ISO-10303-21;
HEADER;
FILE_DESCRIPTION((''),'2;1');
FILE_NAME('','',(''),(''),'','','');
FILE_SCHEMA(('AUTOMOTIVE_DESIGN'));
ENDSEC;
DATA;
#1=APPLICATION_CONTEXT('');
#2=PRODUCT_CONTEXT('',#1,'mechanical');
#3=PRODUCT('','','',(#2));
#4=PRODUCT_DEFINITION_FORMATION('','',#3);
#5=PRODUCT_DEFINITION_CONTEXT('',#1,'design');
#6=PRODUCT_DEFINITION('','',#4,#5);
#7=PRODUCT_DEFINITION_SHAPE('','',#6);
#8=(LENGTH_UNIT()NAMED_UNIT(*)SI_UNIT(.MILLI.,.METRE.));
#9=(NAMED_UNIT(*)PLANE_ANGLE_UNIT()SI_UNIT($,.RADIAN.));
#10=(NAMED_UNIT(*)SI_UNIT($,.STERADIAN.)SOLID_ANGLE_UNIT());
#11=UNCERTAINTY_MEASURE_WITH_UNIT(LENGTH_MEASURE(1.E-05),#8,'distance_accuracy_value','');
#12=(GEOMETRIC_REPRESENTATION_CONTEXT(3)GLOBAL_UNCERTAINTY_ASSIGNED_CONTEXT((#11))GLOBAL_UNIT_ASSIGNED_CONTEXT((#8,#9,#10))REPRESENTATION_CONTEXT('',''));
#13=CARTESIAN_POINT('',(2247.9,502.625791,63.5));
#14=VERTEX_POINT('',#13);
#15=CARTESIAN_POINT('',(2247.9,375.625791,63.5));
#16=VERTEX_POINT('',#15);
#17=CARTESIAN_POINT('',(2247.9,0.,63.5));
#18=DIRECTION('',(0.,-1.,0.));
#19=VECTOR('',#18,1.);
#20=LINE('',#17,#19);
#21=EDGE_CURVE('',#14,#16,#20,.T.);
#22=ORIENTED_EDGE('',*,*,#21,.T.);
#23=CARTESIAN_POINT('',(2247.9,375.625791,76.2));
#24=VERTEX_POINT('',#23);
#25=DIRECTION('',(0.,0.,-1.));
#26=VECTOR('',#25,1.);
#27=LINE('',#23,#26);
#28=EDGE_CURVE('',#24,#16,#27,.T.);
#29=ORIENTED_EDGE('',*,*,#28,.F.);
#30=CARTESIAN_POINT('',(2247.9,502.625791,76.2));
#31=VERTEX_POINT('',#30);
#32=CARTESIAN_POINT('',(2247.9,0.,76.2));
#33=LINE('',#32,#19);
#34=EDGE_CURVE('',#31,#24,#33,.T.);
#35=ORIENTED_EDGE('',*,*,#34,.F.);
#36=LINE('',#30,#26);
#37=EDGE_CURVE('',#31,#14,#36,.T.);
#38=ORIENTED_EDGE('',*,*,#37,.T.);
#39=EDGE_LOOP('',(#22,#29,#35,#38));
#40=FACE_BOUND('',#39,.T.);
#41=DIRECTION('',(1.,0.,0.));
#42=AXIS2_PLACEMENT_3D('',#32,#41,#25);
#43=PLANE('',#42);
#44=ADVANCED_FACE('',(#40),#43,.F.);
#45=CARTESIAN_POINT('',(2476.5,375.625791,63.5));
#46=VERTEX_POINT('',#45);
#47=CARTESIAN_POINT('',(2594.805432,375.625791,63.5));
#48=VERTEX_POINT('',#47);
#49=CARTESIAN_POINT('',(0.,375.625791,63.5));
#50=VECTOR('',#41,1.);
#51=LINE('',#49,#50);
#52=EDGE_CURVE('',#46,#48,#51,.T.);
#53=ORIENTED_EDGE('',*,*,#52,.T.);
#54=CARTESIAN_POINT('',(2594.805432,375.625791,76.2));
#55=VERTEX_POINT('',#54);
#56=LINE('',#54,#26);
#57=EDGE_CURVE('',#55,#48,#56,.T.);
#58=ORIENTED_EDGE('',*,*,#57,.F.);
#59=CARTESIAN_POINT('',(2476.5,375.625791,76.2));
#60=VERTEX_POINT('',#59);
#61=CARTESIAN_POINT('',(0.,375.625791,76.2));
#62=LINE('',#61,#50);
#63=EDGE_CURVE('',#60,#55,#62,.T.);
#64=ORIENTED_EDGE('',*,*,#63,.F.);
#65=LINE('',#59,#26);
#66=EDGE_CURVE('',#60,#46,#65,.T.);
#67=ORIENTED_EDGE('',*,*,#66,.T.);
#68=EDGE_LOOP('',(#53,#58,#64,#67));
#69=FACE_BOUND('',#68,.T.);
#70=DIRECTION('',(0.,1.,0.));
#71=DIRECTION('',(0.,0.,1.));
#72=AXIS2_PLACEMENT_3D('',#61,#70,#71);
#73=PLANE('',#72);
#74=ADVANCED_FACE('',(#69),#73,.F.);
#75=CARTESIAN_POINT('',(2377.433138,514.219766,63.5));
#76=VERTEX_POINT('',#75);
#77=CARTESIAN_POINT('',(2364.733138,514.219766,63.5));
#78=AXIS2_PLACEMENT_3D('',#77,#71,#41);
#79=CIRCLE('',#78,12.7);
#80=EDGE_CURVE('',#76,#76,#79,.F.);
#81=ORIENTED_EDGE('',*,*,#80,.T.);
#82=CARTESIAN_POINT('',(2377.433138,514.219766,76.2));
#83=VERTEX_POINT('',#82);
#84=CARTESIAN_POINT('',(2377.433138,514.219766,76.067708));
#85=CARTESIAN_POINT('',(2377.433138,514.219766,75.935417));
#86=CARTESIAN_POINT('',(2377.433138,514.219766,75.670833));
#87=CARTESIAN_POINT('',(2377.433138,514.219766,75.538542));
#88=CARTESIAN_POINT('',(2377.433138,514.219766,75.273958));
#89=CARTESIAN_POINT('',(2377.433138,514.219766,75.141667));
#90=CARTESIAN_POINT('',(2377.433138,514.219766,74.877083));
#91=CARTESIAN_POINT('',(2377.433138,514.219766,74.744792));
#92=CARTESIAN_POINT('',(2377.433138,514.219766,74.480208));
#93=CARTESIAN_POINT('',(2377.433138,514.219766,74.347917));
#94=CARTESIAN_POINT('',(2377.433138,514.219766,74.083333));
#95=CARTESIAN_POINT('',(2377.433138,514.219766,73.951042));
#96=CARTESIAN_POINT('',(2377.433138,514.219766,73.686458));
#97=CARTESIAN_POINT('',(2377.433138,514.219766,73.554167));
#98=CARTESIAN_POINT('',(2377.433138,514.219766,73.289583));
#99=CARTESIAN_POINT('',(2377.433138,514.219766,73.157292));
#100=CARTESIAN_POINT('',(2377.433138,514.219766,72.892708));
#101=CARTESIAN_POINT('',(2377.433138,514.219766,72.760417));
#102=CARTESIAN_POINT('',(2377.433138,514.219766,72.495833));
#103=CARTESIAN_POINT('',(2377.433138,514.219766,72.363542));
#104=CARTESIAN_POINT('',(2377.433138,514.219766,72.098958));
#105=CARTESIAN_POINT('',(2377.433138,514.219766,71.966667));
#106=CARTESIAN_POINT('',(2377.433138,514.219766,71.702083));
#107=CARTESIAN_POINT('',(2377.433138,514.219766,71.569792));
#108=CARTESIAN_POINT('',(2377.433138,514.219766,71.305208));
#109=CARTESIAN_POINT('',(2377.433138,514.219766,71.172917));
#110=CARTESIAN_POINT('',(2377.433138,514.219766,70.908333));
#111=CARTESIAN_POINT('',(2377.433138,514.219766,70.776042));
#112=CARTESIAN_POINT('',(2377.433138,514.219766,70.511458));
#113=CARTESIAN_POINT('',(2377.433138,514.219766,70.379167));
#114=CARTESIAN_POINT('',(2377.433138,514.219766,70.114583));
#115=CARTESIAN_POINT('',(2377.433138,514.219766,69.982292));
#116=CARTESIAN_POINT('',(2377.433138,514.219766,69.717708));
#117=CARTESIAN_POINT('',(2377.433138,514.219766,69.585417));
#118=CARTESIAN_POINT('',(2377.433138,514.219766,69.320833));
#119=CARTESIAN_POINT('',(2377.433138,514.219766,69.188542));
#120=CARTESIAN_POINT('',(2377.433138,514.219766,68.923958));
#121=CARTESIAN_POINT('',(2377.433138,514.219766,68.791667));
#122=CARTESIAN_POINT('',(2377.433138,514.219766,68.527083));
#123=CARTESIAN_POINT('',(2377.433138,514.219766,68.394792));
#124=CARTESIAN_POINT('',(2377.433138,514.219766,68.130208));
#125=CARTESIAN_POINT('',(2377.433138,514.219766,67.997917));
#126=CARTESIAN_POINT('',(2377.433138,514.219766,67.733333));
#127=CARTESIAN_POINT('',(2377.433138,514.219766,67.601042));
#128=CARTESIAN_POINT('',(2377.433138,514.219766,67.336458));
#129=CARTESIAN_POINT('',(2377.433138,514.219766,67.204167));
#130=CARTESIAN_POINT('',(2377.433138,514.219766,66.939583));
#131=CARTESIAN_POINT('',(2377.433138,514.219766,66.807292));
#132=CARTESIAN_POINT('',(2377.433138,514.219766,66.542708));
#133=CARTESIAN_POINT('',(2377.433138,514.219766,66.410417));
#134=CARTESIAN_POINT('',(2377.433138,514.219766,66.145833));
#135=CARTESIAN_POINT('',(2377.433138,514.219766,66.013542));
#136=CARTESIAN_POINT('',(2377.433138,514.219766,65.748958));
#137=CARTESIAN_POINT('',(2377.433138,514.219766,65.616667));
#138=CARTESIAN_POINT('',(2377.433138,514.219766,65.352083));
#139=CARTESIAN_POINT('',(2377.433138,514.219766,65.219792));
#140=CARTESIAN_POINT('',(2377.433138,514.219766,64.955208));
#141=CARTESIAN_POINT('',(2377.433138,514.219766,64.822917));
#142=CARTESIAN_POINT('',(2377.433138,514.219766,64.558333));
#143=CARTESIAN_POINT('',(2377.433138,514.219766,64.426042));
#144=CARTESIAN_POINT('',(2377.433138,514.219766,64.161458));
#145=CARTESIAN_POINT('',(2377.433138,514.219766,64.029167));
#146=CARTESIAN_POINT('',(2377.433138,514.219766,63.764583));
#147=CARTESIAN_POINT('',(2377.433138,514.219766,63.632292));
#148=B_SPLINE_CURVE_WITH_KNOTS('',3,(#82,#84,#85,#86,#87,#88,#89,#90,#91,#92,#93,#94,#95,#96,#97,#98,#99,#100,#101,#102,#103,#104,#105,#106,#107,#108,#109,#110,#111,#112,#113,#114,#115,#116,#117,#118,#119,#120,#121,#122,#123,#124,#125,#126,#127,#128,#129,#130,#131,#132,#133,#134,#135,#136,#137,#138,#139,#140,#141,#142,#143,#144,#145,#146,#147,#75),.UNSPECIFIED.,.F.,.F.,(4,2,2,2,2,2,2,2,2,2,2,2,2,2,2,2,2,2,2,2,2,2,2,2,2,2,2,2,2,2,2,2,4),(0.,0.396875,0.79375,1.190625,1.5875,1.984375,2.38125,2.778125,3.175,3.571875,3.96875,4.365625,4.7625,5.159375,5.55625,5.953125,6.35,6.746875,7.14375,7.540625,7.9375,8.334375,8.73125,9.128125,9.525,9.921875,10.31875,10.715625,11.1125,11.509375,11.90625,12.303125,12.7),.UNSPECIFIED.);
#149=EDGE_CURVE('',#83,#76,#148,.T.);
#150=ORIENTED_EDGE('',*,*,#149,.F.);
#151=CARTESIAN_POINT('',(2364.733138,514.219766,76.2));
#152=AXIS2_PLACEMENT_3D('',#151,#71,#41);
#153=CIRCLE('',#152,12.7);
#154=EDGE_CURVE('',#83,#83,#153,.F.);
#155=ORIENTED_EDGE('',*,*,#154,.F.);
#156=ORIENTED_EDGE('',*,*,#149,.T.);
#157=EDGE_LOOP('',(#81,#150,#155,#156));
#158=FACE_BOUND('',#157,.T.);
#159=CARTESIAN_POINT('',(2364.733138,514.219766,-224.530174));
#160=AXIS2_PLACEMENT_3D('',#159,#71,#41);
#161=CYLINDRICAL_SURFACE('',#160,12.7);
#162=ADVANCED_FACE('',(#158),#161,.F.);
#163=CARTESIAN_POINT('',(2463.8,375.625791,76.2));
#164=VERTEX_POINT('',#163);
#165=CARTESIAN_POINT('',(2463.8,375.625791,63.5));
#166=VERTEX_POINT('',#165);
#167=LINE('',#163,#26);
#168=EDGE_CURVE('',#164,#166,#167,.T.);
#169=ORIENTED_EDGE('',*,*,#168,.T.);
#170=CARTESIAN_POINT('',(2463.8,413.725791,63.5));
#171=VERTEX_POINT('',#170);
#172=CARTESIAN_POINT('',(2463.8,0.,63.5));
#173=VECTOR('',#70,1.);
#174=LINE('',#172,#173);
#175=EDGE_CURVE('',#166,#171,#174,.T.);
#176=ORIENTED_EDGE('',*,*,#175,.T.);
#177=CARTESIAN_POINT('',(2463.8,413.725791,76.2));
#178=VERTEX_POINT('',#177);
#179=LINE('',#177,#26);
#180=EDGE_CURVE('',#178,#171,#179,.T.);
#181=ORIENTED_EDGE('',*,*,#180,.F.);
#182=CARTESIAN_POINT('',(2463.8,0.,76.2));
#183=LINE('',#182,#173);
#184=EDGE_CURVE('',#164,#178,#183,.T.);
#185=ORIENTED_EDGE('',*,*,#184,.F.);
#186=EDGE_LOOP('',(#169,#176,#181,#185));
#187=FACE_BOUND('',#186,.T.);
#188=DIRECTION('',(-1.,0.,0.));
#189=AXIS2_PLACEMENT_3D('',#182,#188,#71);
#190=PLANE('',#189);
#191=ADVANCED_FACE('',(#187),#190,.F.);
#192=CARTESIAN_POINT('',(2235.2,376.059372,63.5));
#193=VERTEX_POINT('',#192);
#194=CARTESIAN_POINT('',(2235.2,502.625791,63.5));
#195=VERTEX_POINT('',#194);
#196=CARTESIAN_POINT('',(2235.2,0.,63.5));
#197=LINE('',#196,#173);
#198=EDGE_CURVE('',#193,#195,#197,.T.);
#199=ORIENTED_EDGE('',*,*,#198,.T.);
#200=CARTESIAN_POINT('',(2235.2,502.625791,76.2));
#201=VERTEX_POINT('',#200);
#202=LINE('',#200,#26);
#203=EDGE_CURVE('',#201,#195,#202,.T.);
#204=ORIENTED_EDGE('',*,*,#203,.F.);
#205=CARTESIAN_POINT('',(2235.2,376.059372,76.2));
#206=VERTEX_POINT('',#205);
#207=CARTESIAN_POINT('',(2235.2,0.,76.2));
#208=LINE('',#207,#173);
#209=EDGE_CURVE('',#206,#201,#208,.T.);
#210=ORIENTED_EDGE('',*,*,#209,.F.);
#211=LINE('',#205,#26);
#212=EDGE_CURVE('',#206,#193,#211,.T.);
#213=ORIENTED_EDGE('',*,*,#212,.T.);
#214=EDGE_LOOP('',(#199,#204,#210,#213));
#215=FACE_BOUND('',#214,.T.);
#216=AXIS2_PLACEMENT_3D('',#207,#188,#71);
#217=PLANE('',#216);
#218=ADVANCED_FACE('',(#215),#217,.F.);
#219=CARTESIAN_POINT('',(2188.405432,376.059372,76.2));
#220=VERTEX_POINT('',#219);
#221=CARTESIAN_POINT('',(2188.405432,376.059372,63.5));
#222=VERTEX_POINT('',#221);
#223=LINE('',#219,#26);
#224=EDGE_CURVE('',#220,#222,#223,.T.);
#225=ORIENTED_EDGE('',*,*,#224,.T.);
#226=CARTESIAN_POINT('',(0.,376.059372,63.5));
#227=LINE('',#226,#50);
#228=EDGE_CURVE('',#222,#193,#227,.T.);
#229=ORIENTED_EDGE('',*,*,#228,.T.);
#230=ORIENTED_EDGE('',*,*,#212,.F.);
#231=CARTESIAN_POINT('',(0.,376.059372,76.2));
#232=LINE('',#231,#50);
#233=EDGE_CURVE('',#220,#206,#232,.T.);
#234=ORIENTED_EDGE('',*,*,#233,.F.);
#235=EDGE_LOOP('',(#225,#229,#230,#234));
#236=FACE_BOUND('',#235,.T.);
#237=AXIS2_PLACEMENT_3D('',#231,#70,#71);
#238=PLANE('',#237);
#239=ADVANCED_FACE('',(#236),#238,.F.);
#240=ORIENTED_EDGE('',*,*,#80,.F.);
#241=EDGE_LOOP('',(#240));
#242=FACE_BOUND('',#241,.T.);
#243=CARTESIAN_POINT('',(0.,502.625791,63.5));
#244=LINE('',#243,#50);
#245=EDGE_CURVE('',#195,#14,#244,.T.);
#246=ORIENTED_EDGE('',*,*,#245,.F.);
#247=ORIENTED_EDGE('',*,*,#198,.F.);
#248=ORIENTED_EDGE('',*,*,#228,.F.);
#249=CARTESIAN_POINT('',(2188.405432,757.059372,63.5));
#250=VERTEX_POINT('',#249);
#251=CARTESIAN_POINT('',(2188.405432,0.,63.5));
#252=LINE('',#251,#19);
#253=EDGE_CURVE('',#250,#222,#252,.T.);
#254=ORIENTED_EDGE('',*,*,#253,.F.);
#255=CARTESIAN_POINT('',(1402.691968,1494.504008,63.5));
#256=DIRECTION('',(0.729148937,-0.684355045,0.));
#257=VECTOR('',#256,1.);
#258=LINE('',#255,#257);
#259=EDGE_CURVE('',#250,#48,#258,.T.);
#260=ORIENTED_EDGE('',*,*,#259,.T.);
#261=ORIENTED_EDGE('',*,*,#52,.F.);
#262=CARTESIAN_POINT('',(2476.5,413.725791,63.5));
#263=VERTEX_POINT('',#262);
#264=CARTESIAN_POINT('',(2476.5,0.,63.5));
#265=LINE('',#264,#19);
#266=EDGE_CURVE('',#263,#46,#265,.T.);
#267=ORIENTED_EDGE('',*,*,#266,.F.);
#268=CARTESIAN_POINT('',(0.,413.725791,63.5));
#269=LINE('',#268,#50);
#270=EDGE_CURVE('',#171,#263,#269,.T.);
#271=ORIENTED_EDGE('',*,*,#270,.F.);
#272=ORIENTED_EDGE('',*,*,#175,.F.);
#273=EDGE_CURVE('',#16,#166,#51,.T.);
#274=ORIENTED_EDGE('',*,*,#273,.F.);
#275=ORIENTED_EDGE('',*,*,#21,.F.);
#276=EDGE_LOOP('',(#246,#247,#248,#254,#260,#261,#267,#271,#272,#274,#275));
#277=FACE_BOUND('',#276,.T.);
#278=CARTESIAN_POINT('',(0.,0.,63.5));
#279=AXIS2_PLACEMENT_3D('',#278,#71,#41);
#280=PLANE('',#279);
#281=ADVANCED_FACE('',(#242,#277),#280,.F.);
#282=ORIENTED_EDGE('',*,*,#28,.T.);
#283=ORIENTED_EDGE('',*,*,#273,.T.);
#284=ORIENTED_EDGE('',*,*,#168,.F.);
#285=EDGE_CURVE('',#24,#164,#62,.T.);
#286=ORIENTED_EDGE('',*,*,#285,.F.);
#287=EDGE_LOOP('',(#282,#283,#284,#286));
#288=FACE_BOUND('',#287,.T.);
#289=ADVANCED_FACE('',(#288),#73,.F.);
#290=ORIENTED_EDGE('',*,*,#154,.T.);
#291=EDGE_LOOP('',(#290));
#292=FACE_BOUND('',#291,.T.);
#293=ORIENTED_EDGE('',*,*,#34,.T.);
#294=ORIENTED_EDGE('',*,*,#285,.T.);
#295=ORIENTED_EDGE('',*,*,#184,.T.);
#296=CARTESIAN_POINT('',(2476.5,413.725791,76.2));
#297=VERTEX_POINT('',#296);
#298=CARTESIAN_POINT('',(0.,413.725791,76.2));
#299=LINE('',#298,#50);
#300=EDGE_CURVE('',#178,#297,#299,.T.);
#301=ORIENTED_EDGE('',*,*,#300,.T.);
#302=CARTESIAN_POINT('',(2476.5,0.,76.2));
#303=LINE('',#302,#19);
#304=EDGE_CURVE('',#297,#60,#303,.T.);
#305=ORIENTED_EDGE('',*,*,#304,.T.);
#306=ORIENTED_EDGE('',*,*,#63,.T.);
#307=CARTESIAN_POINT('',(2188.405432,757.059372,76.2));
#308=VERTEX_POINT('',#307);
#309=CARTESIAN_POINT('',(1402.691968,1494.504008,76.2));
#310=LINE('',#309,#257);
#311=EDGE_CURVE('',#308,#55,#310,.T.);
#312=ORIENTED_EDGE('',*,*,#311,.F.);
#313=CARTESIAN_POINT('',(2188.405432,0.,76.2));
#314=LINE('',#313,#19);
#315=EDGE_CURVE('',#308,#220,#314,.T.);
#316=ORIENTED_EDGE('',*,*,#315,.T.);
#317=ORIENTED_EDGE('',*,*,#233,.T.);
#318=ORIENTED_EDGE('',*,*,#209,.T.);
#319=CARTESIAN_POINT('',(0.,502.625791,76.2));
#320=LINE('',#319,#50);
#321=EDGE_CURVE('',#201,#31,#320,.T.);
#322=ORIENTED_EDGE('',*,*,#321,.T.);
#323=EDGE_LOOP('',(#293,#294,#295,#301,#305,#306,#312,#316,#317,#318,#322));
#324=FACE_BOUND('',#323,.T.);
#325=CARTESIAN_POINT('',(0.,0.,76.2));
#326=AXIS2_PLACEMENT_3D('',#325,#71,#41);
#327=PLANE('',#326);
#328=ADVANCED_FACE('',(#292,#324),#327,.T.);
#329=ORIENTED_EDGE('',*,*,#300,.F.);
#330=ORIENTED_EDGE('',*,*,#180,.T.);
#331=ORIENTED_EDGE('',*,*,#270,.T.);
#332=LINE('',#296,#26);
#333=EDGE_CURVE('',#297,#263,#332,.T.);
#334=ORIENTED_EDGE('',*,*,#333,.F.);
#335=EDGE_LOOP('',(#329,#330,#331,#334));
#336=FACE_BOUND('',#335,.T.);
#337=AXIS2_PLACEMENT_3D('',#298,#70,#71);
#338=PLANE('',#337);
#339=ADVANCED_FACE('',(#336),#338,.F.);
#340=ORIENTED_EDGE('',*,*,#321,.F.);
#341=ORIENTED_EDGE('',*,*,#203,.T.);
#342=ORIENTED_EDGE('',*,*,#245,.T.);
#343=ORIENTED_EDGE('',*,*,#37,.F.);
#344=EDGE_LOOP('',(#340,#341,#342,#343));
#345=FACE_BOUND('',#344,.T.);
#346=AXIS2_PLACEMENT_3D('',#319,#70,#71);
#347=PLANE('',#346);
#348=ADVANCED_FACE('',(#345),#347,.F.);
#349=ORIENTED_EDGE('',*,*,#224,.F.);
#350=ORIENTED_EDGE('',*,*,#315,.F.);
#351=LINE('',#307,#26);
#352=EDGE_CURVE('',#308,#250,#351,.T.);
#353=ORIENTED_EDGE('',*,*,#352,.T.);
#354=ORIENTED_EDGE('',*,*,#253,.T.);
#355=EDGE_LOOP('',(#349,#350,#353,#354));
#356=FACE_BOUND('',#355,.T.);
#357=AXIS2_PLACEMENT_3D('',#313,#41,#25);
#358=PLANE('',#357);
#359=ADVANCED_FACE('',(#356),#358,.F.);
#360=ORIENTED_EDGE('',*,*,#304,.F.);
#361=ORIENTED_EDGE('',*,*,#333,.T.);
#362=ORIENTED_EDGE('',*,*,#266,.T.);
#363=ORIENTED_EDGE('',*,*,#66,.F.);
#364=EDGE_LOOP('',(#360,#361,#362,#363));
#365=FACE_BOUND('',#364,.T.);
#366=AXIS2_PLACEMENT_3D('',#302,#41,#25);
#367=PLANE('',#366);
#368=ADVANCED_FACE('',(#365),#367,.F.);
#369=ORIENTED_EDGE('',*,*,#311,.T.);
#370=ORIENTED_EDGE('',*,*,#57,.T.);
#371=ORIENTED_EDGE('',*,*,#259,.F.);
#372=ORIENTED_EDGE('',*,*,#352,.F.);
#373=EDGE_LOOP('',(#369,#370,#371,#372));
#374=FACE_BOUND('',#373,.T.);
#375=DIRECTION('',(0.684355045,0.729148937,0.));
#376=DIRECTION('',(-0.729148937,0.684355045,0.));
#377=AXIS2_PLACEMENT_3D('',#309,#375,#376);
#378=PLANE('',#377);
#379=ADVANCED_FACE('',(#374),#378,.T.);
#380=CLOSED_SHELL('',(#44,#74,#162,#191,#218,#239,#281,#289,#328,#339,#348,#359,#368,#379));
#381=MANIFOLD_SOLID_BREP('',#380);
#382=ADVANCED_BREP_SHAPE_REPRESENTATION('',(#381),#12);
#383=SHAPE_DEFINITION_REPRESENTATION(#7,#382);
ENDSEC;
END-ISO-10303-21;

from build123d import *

# Parameters (mm, degrees)
BOSS_EXTRUDE1_START = 63.5
BOSS_EXTRUDE1_DEPTH = 12.7
CAVITY1_START       = 63.5
CAVITY1_OUTLINE_R   = 12.7
CAVITY1_DEPTH       = 12.7


# Read off the part's stored shape, not the designer's step: Cavity1
with BuildPart() as part:
    # Sketch1 → Boss-Extrude1 (new body)
    with BuildSketch(Plane.XY.offset(BOSS_EXTRUDE1_START)):
        Polygon((2188.405431846, 757.059372145), (2594.805431846, 375.625791085), (2476.5, 375.625791085), (2476.5, 413.725791085), (2463.8, 413.725791085), (2463.8, 375.625791085), (2247.9, 375.625791085), (2247.9, 502.625791085), (2235.2, 502.625791085), (2235.2, 376.059372145), (2188.405431846, 376.059372145), align=None)
    extrude(amount=BOSS_EXTRUDE1_DEPTH)

    # Cavity1 outline → Cavity1 (cut)
    with BuildSketch(Plane.XY.offset(CAVITY1_START)):
        with Locations((2364.733137895, 514.21976629)):
            Circle(CAVITY1_OUTLINE_R)
    extrude(amount=CAVITY1_DEPTH, mode=Mode.SUBTRACT)


solid = part.part
